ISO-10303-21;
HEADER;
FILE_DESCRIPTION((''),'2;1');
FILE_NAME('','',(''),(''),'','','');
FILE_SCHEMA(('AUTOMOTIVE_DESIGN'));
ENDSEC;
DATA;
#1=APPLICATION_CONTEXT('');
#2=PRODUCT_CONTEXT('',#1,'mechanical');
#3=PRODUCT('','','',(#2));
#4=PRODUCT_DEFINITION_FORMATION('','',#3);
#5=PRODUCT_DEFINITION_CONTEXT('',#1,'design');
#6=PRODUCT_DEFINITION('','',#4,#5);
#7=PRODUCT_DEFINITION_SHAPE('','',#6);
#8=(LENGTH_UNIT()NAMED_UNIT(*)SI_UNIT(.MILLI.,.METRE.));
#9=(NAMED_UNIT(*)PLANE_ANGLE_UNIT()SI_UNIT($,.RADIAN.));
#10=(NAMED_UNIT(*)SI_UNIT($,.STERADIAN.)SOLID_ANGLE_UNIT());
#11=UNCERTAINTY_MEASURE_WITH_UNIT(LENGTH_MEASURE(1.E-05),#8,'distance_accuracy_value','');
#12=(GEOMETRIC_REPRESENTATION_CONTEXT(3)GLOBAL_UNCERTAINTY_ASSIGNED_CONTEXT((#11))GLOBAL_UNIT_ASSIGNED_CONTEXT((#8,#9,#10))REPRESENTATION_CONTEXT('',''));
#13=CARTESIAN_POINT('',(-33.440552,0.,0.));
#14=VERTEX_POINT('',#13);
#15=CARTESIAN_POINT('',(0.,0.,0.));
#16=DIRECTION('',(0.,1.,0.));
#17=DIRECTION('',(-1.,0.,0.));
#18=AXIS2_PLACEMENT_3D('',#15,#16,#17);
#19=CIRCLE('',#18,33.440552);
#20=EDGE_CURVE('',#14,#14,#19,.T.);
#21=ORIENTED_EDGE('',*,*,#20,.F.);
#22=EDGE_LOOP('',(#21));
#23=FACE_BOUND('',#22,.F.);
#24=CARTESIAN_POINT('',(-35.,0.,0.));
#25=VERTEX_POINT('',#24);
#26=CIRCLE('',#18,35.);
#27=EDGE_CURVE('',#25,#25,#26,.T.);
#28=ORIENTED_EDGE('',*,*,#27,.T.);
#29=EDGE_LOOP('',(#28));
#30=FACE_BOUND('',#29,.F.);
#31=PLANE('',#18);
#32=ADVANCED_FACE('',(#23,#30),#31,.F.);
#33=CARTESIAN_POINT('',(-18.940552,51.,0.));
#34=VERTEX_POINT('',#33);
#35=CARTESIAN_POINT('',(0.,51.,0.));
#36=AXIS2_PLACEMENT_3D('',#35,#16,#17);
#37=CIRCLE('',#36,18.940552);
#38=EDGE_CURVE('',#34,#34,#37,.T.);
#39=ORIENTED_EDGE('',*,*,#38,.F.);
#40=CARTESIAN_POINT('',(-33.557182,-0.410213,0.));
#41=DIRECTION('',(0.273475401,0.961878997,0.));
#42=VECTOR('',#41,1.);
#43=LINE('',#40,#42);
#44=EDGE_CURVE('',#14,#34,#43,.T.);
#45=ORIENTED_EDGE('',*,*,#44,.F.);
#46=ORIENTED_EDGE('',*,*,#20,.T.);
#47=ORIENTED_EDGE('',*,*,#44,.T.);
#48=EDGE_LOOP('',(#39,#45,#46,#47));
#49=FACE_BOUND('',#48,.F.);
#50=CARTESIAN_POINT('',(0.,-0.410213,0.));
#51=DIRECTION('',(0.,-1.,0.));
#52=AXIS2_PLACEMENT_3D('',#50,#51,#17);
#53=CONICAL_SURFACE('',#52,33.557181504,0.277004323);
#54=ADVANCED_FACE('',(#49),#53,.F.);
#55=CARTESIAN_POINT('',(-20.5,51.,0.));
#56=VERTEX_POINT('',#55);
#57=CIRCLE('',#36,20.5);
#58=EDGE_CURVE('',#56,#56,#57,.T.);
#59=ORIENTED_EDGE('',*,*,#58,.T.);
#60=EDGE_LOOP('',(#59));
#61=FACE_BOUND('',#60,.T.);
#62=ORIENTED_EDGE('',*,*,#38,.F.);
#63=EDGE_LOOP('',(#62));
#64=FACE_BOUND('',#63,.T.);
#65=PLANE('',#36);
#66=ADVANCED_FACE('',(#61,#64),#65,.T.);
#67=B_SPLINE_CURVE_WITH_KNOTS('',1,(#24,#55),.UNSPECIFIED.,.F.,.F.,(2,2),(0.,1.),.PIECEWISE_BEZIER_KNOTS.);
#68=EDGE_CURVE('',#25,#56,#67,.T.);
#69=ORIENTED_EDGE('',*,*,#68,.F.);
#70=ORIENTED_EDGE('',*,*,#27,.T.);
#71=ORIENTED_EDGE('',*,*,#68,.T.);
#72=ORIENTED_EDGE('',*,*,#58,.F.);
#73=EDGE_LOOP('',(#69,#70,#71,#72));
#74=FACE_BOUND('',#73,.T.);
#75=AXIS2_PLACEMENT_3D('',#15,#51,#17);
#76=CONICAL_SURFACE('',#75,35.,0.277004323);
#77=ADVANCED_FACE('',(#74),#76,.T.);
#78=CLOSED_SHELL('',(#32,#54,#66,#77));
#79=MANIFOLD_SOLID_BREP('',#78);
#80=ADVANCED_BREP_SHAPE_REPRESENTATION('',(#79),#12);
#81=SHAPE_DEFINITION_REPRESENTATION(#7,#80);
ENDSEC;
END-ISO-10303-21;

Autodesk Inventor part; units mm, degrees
ref_plane "YZ Plane" through (0, 0, 0) normal (1, 0, 0) x (0, 1, 0)
ref_plane "XY Plane" through (0, 0, 0) normal (0, 0, 1) x (1, 0, 0)
sketch "Szkic6" plane through (0, 0, 0) normal (0, 1, 0) x (-1, 0, 0)
  circle A0 centre (0, 0) radius 35
  dimension "d33" = 70
ref_plane "Płaszczyzna konstrukcyjna1" through (0, 51, 0) normal (0, 1, 0) x (-1, 0, 0)
sketch "Szkic7" plane through (0, 51, 0) normal (0, 1, 0) x (-1, 0, 0)
  circle A0 centre (0, 0) radius 20.5
  dimension "d35" = 41
loft "Wyciągnięcie złożone1" add profiles "Szkic6", "Szkic7"
shell "Skorupa1" thickness 1.5 removed faces 2 at (-3.5154, 51, 4.1371) at (1.9985, 0, 11.019)
equation "\"d33\" = OD1"
equation "\"d35\" = OD2"
equation "\"d52\" = THK"
equation "\"SzerokośćGięciaPodcięcia\" = Grubość"
equation "\"RozmiarPodcięciaNarożnika\" = 4 * Grubość"
equation "\"PromieńPrzejścia\" = PromieńGięcia"
equation "\"Rozmiar_promienia_Jacobiego\" = PromieńGięcia"
equation "\"Wielk_odstępu\" = Grubość"
equation "\"d2\" = PromieńGięcia"
equation "\"d23\" = PromieńGięcia"
equation "\"OD1\" = 70"
equation "\"OD2\" = 41"
equation "\"L\" = 51"
equation "\"THK\" = 1.5"
equation "\"d34\" = L"
equation "\"Grubość\" = 1.5"
equation "\"PromieńGięcia\" = 3"
properties part number "Redukcja symetryczna Ø70x41x1,5 L=51" material "304"
